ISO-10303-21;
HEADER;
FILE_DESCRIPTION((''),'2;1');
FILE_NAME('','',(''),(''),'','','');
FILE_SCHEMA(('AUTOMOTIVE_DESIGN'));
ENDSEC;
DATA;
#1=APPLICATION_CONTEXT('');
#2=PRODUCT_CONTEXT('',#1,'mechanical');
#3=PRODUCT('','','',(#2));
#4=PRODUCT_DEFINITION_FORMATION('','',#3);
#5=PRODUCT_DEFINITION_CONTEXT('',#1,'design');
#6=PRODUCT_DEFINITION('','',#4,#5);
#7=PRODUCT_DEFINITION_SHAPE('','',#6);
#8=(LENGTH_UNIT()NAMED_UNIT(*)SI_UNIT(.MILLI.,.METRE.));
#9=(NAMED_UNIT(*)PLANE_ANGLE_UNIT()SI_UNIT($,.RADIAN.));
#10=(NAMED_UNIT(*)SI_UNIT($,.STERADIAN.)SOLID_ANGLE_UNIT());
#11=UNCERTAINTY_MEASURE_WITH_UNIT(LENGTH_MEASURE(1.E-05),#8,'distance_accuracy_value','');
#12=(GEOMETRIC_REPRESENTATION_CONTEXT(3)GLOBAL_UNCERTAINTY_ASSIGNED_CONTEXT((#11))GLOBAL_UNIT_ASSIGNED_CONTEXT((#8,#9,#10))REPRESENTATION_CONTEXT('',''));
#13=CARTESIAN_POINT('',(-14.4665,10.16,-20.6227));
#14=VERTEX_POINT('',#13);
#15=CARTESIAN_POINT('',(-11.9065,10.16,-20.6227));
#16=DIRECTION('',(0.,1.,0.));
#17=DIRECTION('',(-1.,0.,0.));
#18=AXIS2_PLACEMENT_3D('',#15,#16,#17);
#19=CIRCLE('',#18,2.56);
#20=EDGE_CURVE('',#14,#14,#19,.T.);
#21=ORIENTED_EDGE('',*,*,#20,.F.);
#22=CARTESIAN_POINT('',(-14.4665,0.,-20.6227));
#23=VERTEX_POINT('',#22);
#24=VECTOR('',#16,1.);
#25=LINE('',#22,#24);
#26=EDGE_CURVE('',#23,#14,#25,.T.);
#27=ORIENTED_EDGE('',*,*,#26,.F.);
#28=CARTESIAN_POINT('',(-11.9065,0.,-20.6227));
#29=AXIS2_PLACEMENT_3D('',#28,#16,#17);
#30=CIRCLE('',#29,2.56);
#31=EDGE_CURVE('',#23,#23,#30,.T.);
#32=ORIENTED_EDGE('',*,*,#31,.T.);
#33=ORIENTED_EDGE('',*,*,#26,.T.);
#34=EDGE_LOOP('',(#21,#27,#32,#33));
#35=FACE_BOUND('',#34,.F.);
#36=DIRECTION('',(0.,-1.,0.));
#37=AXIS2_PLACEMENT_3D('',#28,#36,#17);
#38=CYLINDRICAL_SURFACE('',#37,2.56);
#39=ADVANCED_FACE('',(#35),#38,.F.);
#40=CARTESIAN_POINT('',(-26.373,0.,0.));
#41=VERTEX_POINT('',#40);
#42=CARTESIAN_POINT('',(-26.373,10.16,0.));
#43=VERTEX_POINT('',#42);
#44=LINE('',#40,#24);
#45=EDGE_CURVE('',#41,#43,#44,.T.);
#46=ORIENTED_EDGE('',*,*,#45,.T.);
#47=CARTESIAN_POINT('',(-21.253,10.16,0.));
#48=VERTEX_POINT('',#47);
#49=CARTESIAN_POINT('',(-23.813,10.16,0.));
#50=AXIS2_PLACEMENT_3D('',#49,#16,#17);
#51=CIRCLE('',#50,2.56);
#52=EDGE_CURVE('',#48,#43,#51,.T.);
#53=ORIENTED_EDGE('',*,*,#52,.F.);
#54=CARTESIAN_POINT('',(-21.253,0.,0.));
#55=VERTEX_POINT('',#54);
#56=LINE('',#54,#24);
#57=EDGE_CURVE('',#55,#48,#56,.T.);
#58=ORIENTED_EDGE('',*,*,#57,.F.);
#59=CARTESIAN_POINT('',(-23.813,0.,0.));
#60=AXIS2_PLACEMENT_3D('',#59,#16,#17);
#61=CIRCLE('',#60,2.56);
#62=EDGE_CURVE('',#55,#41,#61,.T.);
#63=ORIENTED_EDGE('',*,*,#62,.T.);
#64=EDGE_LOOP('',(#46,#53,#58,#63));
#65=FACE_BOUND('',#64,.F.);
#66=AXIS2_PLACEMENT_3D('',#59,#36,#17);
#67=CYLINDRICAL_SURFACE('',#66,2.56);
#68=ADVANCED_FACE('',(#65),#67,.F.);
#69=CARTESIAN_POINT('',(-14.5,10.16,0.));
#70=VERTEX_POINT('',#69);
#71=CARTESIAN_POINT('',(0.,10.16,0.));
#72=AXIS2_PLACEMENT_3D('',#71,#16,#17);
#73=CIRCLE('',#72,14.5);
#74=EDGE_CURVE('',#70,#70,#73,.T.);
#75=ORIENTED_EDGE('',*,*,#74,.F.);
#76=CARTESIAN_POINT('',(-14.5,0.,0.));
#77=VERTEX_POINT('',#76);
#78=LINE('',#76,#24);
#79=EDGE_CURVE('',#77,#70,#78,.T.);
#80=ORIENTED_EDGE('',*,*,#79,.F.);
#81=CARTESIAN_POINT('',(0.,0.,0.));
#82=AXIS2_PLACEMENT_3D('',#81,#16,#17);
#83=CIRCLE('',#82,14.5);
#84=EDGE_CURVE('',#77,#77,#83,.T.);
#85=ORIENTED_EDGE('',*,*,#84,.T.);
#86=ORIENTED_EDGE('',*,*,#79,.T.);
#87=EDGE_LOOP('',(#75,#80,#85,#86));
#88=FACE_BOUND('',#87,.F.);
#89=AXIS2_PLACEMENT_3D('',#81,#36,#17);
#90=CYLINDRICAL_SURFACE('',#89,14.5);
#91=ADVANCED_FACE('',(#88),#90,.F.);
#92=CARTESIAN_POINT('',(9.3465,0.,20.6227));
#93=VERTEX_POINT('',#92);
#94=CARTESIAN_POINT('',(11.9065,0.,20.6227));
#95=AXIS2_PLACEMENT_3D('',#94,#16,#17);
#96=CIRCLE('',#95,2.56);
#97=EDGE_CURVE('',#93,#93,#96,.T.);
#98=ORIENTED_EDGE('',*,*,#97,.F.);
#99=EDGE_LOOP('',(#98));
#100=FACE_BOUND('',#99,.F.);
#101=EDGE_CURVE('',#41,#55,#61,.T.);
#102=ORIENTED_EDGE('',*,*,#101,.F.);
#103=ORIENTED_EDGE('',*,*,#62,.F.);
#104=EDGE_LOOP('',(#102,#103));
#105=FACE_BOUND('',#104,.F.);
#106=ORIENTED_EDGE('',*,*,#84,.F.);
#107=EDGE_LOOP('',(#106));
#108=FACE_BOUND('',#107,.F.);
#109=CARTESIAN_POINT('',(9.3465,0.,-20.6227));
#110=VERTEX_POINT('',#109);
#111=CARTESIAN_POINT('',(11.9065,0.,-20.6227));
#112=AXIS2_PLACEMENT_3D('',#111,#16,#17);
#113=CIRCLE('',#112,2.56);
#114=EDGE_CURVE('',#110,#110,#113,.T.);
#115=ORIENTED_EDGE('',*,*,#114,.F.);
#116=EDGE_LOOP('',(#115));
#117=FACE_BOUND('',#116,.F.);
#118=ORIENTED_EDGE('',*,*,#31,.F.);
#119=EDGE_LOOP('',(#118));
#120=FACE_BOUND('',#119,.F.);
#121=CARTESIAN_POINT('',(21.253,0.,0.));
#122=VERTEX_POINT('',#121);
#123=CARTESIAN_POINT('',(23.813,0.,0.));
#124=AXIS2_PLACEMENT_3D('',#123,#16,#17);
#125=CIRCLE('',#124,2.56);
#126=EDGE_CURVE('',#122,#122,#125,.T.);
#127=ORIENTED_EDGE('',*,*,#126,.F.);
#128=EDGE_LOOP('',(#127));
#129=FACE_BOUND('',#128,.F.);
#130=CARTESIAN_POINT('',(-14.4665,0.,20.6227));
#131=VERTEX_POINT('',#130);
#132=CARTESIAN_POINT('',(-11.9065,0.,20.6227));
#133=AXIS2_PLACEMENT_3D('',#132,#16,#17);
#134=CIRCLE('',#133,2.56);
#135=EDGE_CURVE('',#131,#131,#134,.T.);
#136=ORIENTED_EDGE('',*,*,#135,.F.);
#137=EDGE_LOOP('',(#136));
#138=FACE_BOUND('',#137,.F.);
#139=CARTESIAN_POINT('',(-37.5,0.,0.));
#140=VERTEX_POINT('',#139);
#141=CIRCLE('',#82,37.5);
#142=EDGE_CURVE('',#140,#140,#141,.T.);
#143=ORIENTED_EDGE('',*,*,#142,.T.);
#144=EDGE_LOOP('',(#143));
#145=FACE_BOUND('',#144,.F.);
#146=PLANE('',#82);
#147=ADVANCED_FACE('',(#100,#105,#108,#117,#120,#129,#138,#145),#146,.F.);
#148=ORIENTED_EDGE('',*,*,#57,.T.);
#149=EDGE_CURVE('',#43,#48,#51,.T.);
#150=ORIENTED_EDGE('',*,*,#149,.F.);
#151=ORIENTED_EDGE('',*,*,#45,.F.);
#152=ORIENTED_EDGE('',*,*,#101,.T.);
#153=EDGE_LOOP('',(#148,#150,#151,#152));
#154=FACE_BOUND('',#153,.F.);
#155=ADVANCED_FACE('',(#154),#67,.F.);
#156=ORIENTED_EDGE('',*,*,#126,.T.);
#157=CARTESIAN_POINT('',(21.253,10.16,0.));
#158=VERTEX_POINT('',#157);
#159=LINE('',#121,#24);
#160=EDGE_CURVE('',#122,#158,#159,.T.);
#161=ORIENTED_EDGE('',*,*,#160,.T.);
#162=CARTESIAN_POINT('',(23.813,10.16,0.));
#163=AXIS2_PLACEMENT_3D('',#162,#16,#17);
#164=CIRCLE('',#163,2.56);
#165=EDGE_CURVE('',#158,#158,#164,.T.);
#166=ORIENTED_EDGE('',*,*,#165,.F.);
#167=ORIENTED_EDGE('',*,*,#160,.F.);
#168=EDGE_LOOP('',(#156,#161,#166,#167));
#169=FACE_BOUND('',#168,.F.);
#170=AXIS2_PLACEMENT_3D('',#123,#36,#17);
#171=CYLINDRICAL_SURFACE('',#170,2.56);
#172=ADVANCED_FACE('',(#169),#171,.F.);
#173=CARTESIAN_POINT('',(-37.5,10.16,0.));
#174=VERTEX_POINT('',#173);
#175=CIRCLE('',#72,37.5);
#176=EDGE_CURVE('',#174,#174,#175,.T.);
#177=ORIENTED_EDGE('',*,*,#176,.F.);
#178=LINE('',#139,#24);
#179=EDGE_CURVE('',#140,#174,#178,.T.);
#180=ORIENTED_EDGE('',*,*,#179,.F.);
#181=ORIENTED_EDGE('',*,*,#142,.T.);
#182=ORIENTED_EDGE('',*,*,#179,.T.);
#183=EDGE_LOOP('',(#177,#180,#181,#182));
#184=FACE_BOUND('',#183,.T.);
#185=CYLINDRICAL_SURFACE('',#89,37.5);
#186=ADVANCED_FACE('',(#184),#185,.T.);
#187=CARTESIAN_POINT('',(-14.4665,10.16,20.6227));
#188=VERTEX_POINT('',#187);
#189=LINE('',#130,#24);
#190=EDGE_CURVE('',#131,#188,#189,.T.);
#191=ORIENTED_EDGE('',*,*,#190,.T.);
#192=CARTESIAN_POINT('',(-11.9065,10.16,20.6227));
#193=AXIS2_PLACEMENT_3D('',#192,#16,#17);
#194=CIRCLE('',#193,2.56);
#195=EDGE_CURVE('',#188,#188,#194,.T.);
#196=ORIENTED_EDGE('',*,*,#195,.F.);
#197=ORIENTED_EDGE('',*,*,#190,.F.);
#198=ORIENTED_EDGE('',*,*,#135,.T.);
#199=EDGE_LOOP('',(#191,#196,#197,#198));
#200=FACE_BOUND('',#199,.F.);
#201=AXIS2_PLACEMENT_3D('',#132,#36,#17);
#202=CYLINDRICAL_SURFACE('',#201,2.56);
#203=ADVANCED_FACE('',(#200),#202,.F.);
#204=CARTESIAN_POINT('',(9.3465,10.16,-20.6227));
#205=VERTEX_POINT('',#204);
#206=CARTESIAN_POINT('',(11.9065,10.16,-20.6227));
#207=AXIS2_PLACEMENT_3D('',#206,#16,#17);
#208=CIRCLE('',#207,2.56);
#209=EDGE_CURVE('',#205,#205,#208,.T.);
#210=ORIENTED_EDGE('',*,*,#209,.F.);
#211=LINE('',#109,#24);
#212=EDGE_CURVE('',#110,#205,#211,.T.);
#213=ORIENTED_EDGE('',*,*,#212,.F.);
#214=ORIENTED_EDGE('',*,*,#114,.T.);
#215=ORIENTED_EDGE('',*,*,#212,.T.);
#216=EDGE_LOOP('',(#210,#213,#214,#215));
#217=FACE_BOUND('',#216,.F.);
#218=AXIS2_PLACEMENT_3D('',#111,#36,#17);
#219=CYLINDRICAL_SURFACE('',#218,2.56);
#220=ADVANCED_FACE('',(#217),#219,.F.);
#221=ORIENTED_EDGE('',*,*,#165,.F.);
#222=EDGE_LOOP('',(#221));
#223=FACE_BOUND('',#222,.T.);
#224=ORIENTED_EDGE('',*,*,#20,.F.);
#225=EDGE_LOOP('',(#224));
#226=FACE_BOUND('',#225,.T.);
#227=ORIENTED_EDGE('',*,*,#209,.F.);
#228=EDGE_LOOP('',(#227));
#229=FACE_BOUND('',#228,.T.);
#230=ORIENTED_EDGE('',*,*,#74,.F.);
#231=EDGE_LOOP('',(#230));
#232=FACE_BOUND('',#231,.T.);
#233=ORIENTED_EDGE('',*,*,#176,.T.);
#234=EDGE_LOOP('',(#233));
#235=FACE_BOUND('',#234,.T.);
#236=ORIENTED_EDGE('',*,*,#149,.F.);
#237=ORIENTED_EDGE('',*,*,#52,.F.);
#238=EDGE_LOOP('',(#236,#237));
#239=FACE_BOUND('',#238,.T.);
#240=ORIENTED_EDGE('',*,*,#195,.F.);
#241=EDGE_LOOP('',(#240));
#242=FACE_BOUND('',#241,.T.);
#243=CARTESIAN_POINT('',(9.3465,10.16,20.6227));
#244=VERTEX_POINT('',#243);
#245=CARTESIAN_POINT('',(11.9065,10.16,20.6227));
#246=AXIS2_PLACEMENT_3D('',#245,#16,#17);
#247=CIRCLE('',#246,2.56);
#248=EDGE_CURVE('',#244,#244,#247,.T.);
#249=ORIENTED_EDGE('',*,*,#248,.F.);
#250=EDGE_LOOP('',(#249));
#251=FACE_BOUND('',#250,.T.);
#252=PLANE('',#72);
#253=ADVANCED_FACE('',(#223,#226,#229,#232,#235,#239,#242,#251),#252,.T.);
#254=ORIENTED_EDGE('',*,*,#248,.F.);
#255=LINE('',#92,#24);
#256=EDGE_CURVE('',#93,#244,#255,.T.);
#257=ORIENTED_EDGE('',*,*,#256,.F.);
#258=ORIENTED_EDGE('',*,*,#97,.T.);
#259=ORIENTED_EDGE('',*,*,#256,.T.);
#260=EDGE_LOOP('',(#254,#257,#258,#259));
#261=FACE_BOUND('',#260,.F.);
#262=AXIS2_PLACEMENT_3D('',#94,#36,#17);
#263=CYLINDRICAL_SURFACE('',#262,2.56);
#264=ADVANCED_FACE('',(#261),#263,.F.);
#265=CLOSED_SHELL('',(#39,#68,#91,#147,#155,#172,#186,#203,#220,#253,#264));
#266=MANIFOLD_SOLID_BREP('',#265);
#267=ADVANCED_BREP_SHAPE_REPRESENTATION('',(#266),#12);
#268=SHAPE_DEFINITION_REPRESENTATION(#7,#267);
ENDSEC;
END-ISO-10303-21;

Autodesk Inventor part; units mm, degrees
ref_plane "YZ Plane" through (0, 0, 0) normal (1, 0, 0) x (0, 1, 0)
ref_plane "XZ Plane" through (0, 0, 0) normal (0, 1, 0) x (-1, 0, 0)
ref_plane "XY Plane" through (0, 0, 0) normal (0, 0, 1) x (1, 0, 0)
sketch "Sketch1" plane through (0, 0, 0) normal (0, 1, 0) x (-1, 0, 0)
  circle A0 centre (0, 0) radius 37.5
  circle A1 centre (0, 0) radius 14.5
  line L0 (0, 0) -> (23.813, 0)
  circle A2 centre (23.813, 0) radius 2.56
  circle A3 centre (11.9065, 20.6227) radius 2.56
  circle A4 centre (-11.9065, 20.6227) radius 2.56
  circle A5 centre (-23.813, 0) radius 2.56
  circle A6 centre (-11.9065, -20.6227) radius 2.56
  circle A7 centre (11.9065, -20.6227) radius 2.56
  dimension "d0" = 75
  dimension "d1" = 29
  dimension "d2" = 23.813
  dimension "d3" = 5.12
  dimension "d6" = 360
extrude "Extrusion1" add sketch "Sketch1" along normal blind 10.16
properties part number "driving system S4"
